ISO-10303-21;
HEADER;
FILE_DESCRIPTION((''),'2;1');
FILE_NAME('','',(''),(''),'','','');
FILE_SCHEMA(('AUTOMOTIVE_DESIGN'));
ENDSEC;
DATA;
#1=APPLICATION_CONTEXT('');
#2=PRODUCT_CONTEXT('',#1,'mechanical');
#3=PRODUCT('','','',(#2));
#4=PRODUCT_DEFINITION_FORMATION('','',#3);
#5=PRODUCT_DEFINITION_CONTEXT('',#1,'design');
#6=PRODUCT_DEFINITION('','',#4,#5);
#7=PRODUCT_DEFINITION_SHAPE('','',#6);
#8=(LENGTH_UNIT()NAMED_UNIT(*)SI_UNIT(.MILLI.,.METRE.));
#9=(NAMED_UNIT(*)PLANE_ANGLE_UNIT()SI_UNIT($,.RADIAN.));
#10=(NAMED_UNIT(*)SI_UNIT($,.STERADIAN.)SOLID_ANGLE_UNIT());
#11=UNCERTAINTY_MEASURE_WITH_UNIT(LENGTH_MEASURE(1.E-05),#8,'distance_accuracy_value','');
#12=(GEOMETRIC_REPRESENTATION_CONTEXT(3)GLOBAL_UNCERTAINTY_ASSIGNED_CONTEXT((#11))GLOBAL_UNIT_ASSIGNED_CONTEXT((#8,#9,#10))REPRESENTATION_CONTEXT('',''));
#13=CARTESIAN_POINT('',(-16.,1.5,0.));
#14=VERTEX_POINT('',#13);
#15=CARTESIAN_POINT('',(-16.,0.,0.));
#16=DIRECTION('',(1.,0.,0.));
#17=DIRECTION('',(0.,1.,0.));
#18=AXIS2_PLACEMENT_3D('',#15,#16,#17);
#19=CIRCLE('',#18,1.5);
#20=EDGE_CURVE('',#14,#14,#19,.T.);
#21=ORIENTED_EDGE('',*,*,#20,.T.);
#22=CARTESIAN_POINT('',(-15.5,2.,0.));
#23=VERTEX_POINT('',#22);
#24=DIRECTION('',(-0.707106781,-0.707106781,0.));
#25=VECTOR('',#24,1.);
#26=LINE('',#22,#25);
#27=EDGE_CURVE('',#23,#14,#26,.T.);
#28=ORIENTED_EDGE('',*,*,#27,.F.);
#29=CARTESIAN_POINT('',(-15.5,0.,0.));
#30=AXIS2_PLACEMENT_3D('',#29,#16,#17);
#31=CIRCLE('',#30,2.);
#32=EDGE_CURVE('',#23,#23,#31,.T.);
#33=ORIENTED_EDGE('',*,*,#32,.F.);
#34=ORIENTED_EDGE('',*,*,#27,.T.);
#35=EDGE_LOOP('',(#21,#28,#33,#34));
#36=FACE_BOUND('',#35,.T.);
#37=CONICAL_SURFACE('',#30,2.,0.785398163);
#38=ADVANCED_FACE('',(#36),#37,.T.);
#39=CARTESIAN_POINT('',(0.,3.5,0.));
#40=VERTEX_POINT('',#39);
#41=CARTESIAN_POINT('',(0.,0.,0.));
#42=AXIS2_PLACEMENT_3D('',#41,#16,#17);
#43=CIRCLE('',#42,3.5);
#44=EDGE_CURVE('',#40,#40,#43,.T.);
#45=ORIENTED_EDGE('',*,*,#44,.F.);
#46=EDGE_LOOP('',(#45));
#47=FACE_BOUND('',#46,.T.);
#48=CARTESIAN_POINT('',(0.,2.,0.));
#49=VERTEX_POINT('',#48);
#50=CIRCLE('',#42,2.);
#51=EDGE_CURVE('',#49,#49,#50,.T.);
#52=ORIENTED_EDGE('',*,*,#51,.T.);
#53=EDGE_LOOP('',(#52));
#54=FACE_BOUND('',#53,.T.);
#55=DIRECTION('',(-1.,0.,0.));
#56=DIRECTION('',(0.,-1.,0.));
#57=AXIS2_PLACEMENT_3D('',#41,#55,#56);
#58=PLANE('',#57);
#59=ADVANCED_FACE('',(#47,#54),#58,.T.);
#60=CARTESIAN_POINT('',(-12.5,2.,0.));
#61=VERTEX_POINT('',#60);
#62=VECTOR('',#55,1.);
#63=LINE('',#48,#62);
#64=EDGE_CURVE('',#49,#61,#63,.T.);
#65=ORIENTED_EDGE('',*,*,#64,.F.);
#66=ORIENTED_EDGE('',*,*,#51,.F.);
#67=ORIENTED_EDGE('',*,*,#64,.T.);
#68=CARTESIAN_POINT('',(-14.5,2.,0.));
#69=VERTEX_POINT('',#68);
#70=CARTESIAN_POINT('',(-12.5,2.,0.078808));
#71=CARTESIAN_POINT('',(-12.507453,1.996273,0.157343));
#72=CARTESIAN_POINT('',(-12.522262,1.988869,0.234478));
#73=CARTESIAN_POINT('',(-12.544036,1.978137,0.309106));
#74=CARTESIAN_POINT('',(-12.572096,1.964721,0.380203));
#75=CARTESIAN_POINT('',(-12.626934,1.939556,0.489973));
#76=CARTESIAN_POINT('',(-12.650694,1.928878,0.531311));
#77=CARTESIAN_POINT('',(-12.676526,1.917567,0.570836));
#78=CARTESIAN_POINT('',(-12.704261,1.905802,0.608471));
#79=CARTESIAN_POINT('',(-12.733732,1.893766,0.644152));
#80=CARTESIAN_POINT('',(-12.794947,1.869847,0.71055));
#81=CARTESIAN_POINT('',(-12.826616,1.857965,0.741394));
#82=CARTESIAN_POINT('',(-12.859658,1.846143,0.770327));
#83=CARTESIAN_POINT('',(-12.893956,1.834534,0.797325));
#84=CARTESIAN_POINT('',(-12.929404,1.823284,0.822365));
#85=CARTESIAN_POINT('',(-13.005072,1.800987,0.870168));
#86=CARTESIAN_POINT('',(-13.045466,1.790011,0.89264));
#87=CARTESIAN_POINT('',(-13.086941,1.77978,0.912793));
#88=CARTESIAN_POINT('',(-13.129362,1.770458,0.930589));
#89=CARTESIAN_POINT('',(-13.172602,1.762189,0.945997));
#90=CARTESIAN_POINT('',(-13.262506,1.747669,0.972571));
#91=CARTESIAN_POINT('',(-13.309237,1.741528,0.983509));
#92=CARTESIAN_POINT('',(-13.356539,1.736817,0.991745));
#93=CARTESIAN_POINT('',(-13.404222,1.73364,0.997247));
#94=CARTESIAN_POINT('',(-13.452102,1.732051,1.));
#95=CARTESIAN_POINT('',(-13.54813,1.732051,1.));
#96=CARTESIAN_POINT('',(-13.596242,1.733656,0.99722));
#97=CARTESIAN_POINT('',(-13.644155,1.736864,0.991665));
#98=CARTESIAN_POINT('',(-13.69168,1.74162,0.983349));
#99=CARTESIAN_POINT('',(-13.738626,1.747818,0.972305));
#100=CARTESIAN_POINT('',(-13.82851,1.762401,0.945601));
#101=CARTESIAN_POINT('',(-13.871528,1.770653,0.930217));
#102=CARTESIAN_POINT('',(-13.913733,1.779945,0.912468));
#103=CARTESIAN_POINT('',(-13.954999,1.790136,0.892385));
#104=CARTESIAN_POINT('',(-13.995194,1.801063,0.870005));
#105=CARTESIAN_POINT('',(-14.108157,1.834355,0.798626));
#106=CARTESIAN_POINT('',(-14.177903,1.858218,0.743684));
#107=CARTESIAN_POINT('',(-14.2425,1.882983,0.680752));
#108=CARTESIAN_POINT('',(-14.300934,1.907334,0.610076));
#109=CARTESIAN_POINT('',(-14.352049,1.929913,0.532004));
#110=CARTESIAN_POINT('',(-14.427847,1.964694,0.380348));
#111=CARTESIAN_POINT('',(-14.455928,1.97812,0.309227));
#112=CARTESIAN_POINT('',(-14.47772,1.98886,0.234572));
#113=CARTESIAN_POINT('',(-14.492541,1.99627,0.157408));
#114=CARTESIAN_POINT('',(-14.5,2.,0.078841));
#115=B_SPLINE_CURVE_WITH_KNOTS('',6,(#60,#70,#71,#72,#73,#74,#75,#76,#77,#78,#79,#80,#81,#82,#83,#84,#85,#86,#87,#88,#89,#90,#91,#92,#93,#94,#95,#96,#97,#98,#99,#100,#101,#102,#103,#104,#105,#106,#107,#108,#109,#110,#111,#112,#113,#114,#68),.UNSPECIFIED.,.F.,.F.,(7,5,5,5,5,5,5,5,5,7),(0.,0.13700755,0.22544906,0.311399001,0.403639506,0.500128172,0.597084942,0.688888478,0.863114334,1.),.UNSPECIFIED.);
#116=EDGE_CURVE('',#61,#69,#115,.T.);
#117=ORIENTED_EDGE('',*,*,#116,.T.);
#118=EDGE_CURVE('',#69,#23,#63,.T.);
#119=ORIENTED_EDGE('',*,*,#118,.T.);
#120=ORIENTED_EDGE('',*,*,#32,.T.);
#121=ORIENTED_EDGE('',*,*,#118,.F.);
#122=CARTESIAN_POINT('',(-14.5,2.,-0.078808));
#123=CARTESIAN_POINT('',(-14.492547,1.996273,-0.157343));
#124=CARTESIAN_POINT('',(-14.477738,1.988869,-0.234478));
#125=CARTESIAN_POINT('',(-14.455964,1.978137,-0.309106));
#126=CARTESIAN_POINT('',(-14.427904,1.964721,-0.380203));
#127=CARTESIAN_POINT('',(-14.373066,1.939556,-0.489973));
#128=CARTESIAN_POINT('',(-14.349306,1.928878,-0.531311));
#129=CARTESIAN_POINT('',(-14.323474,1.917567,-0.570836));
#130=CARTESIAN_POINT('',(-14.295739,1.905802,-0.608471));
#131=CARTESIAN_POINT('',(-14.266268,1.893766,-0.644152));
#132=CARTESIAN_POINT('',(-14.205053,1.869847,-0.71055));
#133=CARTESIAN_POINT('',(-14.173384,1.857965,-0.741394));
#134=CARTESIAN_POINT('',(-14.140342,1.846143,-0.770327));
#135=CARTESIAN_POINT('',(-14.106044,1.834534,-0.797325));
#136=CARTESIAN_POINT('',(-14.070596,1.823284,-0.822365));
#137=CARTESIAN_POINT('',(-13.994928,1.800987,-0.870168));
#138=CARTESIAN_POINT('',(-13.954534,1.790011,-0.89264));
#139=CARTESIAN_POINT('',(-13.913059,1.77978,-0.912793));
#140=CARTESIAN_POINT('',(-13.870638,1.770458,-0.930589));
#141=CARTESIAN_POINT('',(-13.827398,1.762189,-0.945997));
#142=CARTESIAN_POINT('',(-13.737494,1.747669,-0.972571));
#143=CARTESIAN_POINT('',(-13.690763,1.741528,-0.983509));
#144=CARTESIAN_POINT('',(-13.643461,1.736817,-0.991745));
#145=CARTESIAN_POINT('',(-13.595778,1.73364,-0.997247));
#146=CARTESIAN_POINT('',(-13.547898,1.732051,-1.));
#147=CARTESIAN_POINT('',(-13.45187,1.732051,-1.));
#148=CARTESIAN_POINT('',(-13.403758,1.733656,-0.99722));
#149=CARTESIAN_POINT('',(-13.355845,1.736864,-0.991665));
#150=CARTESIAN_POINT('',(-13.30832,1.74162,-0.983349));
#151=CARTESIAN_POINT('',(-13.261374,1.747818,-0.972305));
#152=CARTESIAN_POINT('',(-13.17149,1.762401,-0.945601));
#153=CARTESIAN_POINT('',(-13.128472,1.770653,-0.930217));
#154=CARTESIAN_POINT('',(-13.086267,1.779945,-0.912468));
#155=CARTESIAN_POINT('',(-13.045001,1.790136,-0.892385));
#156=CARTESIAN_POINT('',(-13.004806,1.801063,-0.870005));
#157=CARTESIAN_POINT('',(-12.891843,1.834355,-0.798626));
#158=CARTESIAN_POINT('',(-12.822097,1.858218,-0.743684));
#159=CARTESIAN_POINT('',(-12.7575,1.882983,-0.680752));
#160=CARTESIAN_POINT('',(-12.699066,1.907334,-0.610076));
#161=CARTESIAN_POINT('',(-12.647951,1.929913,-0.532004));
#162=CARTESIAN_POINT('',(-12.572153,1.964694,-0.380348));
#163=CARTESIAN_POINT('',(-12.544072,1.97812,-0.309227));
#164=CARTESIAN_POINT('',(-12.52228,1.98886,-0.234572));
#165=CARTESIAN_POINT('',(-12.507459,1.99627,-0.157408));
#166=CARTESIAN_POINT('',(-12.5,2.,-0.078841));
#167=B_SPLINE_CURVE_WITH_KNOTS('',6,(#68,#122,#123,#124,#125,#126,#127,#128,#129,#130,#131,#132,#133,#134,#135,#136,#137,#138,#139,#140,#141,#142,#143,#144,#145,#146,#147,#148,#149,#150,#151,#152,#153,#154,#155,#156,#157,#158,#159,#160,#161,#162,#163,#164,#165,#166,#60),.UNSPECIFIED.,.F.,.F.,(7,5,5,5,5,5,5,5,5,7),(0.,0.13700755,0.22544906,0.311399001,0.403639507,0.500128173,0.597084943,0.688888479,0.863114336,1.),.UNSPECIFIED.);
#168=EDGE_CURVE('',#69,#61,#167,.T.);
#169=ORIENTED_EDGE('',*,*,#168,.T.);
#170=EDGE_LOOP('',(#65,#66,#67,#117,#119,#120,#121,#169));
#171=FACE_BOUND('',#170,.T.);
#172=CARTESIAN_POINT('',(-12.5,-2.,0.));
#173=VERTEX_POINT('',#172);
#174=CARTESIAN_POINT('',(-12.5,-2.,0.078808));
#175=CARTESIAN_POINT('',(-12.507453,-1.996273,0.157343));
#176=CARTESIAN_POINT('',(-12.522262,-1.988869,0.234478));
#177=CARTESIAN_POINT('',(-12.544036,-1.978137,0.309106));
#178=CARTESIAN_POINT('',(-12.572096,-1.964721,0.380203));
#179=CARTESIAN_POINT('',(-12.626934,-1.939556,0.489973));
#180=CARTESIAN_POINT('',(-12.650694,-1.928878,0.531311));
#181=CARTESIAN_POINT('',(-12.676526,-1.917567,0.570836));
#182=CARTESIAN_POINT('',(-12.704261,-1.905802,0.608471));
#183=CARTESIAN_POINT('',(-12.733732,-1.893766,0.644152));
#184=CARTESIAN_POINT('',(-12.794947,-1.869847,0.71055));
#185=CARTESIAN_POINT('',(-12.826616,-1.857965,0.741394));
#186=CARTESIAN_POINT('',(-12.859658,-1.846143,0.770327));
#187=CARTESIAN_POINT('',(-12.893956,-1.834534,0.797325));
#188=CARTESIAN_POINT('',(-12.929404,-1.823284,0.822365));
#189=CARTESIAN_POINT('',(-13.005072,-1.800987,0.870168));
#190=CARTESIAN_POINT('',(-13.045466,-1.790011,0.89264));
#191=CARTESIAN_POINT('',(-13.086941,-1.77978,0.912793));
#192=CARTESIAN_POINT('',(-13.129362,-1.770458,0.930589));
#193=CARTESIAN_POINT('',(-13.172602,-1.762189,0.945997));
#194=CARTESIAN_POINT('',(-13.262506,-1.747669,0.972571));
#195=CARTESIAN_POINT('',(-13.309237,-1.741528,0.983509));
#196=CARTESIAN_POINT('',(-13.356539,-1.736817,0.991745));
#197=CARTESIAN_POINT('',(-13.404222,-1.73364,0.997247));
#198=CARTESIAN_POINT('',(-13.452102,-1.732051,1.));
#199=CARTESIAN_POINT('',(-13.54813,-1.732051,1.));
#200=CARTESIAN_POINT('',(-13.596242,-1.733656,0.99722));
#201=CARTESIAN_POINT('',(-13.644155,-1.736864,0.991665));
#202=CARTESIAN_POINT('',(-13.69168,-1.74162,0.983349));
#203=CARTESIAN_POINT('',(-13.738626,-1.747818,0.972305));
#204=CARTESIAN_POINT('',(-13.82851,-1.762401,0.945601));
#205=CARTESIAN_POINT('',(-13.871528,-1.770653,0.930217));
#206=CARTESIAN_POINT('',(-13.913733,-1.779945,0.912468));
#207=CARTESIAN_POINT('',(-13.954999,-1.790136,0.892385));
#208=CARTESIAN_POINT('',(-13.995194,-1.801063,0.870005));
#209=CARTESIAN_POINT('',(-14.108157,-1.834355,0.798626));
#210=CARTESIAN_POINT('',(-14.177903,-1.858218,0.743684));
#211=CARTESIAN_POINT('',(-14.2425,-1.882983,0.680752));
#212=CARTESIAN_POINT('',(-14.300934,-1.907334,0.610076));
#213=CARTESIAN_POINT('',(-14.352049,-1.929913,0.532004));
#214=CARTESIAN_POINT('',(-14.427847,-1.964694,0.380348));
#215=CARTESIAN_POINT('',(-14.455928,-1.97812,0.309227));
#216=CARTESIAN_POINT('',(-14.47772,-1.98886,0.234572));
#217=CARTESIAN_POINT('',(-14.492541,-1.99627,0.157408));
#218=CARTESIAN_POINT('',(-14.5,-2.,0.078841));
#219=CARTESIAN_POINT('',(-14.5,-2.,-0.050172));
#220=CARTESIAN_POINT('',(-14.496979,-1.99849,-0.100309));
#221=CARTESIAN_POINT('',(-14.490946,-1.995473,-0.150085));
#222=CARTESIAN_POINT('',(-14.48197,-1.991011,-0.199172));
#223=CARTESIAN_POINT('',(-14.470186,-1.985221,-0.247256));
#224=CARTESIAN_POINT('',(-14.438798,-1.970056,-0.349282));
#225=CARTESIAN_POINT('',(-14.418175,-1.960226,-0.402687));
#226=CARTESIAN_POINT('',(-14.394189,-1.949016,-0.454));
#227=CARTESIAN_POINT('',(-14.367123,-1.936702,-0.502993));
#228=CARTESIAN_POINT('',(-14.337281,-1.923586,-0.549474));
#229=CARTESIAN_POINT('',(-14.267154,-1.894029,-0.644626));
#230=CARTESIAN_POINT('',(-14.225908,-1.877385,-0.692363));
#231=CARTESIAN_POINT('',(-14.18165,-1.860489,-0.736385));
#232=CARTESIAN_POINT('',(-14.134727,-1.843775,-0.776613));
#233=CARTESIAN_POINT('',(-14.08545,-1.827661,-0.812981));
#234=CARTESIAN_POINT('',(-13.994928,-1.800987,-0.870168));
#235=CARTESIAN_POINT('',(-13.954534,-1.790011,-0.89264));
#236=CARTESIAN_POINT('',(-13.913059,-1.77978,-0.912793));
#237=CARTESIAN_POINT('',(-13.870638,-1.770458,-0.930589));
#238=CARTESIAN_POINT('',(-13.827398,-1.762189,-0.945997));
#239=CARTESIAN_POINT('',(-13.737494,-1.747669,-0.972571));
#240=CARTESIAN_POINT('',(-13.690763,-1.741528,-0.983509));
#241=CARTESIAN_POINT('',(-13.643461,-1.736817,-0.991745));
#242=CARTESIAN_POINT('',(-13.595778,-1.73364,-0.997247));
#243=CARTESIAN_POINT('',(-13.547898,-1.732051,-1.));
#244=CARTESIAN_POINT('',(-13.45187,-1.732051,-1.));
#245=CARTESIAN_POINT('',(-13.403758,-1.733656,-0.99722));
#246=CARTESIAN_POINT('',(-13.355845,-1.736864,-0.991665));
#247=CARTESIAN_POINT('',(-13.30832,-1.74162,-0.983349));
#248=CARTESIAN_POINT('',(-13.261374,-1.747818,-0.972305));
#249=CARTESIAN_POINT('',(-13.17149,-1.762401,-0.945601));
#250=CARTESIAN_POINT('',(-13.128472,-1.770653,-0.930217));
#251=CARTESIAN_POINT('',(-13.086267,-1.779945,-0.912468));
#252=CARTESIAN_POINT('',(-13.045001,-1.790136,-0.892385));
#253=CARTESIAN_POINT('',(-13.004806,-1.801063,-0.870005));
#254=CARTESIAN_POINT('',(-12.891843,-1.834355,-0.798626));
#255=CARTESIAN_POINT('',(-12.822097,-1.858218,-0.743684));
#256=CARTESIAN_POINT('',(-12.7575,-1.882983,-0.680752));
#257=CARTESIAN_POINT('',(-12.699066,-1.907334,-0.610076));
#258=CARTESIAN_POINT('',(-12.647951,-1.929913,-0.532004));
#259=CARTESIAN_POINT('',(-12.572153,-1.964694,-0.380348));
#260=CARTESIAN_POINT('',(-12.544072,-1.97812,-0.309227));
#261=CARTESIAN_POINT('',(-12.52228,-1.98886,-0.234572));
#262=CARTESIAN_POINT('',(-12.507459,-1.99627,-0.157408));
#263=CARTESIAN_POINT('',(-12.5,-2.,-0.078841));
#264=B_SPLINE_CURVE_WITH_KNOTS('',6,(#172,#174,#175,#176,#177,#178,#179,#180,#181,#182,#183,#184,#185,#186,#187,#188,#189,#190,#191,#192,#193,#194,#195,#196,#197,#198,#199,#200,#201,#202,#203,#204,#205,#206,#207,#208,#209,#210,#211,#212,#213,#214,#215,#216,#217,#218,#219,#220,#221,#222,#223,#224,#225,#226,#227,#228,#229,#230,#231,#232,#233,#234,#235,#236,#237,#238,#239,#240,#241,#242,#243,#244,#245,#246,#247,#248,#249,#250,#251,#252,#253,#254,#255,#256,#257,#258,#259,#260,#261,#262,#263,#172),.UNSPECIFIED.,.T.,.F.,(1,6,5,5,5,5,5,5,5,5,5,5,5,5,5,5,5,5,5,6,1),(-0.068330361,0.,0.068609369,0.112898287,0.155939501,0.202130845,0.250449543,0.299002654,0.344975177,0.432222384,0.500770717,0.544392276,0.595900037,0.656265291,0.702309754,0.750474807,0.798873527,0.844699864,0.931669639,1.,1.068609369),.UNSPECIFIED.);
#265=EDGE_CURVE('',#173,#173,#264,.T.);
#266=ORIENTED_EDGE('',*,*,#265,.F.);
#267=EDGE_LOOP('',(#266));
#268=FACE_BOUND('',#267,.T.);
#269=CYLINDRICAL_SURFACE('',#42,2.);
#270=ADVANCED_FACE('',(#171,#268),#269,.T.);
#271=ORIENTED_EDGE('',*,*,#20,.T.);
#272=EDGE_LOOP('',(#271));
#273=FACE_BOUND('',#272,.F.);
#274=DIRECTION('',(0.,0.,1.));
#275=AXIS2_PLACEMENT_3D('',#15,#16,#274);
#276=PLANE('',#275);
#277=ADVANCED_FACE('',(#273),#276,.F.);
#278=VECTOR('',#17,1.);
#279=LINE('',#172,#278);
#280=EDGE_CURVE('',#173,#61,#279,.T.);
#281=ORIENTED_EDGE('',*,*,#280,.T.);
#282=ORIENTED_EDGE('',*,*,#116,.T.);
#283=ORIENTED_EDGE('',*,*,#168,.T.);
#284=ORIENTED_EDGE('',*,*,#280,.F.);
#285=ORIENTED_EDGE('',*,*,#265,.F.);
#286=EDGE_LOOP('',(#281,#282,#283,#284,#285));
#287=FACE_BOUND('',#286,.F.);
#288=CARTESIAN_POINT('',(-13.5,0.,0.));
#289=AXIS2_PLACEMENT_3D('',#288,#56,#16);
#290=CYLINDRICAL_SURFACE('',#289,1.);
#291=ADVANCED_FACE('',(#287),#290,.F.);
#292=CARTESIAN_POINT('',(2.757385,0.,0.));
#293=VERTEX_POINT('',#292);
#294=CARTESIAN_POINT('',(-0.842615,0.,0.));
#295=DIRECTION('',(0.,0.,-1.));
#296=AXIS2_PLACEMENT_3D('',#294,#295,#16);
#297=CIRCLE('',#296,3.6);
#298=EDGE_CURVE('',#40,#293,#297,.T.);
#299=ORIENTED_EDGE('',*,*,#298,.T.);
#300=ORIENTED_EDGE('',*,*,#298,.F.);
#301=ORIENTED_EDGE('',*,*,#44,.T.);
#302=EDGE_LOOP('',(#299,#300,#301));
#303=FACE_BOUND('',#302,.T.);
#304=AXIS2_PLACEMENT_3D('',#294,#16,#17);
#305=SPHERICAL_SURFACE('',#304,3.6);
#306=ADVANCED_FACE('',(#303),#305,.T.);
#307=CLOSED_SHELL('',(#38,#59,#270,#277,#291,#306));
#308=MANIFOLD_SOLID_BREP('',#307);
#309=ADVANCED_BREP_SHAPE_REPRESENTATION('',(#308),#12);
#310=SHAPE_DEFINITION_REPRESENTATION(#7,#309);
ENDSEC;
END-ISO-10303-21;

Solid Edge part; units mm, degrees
sketch "Sketch1" plane through (0, 0, 0) normal (1, 0, 0) x (0, 1, 0)
  circle A0 centre (0, 0) radius 2
extrude "Protrusion1" add sketch "Sketch1" against normal blind 16
sketch "Sketch2" plane through (0, 0, 0) normal (0, -1, 0) x (1, 0, 0)
  circle A0 centre (-13.5, 0) radius 1
extrude "ExtrudedCutout_1" cut sketch "Sketch2" along normal mid plane 44.763941
chamfer "Chamfer_1" distance 0.5 angle 45 1 edges at (-16, -2, 0)
sketch "Sketch3" plane through (0, 0, 0) normal (0, 0, 1) x (1, 0, 0)
  arc A0 (0, 3.5) -> (2.757385, 0) centre (-0.842615, 0) cw
  line L0 (0, 0) -> (2.757385, 0)
  line L1 (0, 0) -> (0, 3.5)
revolve "RevolvedProtrusion1" add sketch "Sketch3" angle 360 about axis through (0, 0, 0) along (1, 0, 0)
properties material "PVC"
